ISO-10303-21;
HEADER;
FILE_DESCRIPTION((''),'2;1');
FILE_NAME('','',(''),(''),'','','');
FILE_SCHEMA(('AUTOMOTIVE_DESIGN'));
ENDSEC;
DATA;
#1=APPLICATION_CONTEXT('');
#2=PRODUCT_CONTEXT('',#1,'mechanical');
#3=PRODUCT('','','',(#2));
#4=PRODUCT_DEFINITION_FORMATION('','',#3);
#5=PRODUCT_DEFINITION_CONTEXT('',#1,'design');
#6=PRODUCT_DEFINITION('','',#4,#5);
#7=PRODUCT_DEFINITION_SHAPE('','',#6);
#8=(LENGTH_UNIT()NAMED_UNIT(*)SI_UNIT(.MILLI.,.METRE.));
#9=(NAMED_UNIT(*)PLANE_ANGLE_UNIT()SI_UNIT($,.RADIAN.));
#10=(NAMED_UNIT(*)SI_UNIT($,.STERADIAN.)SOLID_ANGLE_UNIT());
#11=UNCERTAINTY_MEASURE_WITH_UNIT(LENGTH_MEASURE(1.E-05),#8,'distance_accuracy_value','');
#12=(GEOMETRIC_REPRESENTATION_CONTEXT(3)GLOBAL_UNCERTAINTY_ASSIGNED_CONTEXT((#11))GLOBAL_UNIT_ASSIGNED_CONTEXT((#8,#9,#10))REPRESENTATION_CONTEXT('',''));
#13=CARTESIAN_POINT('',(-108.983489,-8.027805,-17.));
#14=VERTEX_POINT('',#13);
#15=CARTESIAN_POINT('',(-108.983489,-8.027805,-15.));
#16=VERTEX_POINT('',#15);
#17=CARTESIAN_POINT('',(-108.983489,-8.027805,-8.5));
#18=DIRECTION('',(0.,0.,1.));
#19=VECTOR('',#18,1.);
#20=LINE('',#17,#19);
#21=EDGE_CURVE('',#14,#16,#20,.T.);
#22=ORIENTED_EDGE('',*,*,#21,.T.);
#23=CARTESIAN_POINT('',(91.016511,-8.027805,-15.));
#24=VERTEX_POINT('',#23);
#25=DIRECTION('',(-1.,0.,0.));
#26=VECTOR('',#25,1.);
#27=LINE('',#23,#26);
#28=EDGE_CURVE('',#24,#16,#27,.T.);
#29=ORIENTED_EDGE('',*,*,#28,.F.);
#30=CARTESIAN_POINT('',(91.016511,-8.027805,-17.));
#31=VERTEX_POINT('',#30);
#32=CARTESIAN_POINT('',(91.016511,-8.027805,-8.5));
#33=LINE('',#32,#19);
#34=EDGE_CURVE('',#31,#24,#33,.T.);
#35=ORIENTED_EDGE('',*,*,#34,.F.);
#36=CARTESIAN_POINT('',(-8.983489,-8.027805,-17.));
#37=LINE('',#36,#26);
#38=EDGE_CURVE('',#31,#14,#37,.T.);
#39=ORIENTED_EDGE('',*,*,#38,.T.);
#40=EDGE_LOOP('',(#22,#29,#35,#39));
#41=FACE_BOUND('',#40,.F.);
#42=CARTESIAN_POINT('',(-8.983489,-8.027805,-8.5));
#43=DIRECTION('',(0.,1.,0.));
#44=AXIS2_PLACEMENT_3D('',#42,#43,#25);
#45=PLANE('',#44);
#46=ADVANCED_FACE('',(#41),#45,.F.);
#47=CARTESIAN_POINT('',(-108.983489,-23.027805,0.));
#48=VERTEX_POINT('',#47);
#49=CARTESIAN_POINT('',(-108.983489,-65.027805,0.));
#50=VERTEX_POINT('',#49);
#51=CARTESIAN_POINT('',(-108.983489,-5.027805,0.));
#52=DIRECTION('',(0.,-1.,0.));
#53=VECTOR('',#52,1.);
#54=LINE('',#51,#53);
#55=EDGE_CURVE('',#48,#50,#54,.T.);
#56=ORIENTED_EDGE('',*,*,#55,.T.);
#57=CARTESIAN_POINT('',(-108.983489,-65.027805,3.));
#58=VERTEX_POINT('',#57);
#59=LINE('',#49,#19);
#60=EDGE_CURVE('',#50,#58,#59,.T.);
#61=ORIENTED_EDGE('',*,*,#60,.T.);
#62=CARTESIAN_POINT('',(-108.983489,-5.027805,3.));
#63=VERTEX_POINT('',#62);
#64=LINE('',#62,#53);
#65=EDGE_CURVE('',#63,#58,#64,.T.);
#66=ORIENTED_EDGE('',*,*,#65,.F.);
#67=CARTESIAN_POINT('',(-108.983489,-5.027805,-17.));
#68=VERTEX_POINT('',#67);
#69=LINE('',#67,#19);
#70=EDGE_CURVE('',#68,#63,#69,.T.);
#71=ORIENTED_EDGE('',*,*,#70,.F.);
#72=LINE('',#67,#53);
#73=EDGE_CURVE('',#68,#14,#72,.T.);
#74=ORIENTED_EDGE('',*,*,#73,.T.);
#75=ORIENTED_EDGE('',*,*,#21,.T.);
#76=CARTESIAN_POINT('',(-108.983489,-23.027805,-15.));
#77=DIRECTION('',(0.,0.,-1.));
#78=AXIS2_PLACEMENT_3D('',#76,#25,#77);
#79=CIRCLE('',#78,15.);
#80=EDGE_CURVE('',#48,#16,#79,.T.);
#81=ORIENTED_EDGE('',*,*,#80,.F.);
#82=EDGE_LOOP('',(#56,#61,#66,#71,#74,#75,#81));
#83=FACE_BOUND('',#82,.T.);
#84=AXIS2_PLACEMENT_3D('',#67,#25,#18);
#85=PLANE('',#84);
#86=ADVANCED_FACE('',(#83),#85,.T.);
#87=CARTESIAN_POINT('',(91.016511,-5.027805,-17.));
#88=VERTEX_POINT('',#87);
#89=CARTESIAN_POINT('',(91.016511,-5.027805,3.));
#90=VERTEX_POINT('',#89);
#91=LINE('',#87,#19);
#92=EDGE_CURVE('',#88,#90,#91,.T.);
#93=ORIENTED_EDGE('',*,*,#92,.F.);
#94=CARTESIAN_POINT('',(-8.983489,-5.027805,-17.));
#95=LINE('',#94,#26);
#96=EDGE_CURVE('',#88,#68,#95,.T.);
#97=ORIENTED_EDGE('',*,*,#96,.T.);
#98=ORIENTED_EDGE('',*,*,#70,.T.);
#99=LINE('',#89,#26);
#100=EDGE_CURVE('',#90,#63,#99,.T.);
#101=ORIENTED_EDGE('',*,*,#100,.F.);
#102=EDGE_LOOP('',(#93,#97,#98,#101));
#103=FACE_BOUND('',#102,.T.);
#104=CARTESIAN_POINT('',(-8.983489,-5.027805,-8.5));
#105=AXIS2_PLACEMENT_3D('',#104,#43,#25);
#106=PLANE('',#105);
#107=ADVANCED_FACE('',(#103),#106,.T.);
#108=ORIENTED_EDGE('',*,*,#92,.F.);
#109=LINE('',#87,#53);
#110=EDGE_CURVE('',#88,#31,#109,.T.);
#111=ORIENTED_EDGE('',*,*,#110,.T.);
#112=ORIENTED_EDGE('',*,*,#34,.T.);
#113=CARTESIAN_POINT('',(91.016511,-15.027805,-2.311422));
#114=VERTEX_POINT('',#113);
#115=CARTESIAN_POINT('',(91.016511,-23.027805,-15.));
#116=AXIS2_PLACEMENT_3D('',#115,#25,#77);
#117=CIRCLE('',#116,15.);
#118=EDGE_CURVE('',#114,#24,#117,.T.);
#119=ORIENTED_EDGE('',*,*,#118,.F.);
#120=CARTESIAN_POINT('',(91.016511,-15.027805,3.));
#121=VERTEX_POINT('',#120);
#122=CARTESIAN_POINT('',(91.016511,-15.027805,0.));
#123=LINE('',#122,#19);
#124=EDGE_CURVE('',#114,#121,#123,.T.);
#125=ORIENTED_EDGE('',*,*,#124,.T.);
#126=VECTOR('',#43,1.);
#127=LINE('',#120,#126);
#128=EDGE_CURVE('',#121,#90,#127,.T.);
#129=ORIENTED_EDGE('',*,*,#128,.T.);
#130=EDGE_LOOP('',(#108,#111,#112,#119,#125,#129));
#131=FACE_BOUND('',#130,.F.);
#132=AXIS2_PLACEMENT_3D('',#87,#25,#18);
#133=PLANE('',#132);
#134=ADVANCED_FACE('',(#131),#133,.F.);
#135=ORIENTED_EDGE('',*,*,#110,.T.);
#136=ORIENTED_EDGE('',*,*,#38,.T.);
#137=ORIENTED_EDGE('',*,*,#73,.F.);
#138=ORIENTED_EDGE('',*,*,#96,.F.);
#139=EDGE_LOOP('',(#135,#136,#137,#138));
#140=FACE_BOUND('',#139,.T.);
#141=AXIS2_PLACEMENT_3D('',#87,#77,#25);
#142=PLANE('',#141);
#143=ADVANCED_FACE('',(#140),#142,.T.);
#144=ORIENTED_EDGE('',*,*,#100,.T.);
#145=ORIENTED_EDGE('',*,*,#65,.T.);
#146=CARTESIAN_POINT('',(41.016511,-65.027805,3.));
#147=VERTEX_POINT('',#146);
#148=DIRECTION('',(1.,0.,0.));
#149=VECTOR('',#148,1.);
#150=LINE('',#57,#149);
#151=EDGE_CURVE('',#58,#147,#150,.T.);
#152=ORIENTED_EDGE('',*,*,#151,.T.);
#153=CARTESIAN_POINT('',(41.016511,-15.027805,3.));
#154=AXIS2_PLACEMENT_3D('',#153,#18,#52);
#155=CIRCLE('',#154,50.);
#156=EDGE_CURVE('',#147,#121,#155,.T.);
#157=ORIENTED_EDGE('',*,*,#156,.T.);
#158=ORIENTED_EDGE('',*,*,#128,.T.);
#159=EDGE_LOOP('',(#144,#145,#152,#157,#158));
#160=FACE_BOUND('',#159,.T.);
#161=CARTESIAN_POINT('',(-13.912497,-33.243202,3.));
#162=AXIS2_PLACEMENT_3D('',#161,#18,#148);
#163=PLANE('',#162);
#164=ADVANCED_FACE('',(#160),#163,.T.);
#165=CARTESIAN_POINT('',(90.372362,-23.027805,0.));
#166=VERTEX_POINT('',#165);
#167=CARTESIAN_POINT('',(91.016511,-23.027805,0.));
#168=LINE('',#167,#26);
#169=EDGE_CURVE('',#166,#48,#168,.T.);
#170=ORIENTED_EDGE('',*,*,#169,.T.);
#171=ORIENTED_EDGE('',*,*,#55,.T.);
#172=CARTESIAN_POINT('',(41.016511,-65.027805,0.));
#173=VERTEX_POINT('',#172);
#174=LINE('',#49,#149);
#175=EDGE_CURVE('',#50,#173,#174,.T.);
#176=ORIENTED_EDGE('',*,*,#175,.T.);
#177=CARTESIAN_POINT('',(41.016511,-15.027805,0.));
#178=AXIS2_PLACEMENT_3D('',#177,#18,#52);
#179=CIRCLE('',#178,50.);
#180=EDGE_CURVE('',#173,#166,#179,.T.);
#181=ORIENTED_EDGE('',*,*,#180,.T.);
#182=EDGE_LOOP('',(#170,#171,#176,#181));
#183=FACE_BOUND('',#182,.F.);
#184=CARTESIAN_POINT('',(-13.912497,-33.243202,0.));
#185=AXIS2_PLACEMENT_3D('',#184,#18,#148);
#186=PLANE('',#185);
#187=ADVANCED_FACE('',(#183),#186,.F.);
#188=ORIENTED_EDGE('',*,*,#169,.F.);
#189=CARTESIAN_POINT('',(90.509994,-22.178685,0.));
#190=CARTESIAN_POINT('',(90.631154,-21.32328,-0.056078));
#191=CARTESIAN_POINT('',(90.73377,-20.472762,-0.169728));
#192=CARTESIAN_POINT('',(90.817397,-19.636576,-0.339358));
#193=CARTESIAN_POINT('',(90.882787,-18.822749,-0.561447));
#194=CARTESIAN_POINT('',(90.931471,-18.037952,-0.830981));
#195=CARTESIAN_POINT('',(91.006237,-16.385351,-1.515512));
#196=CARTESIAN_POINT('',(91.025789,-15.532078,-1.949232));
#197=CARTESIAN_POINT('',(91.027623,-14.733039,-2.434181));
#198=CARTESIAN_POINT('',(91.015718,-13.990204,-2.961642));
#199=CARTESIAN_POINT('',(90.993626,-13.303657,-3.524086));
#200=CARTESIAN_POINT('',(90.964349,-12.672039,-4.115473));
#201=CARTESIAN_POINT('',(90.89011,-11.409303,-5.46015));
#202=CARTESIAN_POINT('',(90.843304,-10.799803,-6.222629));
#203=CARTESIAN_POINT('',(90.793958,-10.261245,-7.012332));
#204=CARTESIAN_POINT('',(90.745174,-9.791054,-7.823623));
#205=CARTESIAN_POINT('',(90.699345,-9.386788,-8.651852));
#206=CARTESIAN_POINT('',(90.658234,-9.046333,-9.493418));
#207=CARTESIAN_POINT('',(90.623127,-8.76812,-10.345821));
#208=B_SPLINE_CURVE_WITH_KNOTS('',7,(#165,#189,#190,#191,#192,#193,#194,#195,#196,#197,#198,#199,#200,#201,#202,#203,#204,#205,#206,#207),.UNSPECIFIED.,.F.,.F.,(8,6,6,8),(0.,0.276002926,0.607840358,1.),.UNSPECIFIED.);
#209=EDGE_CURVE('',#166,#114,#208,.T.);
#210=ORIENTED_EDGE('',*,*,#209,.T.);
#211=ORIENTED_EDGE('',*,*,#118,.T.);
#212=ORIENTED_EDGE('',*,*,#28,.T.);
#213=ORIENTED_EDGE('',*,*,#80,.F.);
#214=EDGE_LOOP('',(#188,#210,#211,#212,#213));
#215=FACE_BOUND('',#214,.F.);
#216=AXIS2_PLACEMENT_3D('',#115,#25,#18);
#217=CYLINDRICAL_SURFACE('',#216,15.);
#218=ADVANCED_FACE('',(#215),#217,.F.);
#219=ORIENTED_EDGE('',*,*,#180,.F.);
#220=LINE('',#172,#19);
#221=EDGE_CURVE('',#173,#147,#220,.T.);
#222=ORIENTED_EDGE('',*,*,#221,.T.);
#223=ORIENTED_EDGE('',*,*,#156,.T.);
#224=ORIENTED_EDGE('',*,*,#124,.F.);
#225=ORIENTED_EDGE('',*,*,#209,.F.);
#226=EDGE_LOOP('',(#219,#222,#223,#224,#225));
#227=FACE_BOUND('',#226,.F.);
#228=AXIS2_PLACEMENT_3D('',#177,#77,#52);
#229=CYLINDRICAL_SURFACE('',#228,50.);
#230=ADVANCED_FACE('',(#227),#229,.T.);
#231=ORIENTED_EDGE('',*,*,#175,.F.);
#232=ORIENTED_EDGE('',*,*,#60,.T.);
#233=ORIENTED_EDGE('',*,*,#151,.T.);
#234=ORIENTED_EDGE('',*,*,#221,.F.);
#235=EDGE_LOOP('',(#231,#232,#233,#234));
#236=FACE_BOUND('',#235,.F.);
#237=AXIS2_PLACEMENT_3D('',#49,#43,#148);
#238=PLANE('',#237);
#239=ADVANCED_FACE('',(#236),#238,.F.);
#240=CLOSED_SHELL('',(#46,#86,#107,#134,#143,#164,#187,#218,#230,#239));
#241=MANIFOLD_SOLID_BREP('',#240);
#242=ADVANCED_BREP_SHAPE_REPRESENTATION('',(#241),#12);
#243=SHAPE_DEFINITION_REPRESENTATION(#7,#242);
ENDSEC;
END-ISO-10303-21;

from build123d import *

# Parameters (mm, degrees)
F1_DEPTH = 3
F2_W     = 200
F2_H     = 17
F3_DEPTH = 3
F4_R     = 15


with BuildPart() as f1:
    # F0 (on Top) → F1 (new body)
    with BuildSketch(Plane.XY):
        with BuildLine():
            Line((91.016510874, -5.0278047089), (-108.983489126, -5.0278047089))
            Line((-108.983489126, -5.0278047089), (-108.983489126, -65.0278047089))
            Line((-108.983489126, -65.0278047089), (41.016510874, -65.0278047089))
            ThreePointArc((41.016510874, -65.0278047089), (76.3718499334, -50.3831437682), (91.016510874, -15.0278047089))
            Line((91.016510874, -15.0278047089), (91.016510874, -5.0278047089))
        make_face()
    extrude(amount=F1_DEPTH)

    # F2 (on face) → F3 (join)
    with BuildSketch(Plane(origin=(0, -5.0278047089, 0), x_dir=(-1, 0, 0), z_dir=(0, 1, 0))):
        with Locations((8.983489126, -8.5)):
            Rectangle(F2_W, F2_H)
    extrude(amount=-F3_DEPTH)

    # F4
    f4_edges = [f1.edges().sort_by_distance(p)[0] for p in [
        (-8.983489, -8.027805, 0),
    ]]
    fillet(f4_edges, radius=F4_R)


solid = f1.part
